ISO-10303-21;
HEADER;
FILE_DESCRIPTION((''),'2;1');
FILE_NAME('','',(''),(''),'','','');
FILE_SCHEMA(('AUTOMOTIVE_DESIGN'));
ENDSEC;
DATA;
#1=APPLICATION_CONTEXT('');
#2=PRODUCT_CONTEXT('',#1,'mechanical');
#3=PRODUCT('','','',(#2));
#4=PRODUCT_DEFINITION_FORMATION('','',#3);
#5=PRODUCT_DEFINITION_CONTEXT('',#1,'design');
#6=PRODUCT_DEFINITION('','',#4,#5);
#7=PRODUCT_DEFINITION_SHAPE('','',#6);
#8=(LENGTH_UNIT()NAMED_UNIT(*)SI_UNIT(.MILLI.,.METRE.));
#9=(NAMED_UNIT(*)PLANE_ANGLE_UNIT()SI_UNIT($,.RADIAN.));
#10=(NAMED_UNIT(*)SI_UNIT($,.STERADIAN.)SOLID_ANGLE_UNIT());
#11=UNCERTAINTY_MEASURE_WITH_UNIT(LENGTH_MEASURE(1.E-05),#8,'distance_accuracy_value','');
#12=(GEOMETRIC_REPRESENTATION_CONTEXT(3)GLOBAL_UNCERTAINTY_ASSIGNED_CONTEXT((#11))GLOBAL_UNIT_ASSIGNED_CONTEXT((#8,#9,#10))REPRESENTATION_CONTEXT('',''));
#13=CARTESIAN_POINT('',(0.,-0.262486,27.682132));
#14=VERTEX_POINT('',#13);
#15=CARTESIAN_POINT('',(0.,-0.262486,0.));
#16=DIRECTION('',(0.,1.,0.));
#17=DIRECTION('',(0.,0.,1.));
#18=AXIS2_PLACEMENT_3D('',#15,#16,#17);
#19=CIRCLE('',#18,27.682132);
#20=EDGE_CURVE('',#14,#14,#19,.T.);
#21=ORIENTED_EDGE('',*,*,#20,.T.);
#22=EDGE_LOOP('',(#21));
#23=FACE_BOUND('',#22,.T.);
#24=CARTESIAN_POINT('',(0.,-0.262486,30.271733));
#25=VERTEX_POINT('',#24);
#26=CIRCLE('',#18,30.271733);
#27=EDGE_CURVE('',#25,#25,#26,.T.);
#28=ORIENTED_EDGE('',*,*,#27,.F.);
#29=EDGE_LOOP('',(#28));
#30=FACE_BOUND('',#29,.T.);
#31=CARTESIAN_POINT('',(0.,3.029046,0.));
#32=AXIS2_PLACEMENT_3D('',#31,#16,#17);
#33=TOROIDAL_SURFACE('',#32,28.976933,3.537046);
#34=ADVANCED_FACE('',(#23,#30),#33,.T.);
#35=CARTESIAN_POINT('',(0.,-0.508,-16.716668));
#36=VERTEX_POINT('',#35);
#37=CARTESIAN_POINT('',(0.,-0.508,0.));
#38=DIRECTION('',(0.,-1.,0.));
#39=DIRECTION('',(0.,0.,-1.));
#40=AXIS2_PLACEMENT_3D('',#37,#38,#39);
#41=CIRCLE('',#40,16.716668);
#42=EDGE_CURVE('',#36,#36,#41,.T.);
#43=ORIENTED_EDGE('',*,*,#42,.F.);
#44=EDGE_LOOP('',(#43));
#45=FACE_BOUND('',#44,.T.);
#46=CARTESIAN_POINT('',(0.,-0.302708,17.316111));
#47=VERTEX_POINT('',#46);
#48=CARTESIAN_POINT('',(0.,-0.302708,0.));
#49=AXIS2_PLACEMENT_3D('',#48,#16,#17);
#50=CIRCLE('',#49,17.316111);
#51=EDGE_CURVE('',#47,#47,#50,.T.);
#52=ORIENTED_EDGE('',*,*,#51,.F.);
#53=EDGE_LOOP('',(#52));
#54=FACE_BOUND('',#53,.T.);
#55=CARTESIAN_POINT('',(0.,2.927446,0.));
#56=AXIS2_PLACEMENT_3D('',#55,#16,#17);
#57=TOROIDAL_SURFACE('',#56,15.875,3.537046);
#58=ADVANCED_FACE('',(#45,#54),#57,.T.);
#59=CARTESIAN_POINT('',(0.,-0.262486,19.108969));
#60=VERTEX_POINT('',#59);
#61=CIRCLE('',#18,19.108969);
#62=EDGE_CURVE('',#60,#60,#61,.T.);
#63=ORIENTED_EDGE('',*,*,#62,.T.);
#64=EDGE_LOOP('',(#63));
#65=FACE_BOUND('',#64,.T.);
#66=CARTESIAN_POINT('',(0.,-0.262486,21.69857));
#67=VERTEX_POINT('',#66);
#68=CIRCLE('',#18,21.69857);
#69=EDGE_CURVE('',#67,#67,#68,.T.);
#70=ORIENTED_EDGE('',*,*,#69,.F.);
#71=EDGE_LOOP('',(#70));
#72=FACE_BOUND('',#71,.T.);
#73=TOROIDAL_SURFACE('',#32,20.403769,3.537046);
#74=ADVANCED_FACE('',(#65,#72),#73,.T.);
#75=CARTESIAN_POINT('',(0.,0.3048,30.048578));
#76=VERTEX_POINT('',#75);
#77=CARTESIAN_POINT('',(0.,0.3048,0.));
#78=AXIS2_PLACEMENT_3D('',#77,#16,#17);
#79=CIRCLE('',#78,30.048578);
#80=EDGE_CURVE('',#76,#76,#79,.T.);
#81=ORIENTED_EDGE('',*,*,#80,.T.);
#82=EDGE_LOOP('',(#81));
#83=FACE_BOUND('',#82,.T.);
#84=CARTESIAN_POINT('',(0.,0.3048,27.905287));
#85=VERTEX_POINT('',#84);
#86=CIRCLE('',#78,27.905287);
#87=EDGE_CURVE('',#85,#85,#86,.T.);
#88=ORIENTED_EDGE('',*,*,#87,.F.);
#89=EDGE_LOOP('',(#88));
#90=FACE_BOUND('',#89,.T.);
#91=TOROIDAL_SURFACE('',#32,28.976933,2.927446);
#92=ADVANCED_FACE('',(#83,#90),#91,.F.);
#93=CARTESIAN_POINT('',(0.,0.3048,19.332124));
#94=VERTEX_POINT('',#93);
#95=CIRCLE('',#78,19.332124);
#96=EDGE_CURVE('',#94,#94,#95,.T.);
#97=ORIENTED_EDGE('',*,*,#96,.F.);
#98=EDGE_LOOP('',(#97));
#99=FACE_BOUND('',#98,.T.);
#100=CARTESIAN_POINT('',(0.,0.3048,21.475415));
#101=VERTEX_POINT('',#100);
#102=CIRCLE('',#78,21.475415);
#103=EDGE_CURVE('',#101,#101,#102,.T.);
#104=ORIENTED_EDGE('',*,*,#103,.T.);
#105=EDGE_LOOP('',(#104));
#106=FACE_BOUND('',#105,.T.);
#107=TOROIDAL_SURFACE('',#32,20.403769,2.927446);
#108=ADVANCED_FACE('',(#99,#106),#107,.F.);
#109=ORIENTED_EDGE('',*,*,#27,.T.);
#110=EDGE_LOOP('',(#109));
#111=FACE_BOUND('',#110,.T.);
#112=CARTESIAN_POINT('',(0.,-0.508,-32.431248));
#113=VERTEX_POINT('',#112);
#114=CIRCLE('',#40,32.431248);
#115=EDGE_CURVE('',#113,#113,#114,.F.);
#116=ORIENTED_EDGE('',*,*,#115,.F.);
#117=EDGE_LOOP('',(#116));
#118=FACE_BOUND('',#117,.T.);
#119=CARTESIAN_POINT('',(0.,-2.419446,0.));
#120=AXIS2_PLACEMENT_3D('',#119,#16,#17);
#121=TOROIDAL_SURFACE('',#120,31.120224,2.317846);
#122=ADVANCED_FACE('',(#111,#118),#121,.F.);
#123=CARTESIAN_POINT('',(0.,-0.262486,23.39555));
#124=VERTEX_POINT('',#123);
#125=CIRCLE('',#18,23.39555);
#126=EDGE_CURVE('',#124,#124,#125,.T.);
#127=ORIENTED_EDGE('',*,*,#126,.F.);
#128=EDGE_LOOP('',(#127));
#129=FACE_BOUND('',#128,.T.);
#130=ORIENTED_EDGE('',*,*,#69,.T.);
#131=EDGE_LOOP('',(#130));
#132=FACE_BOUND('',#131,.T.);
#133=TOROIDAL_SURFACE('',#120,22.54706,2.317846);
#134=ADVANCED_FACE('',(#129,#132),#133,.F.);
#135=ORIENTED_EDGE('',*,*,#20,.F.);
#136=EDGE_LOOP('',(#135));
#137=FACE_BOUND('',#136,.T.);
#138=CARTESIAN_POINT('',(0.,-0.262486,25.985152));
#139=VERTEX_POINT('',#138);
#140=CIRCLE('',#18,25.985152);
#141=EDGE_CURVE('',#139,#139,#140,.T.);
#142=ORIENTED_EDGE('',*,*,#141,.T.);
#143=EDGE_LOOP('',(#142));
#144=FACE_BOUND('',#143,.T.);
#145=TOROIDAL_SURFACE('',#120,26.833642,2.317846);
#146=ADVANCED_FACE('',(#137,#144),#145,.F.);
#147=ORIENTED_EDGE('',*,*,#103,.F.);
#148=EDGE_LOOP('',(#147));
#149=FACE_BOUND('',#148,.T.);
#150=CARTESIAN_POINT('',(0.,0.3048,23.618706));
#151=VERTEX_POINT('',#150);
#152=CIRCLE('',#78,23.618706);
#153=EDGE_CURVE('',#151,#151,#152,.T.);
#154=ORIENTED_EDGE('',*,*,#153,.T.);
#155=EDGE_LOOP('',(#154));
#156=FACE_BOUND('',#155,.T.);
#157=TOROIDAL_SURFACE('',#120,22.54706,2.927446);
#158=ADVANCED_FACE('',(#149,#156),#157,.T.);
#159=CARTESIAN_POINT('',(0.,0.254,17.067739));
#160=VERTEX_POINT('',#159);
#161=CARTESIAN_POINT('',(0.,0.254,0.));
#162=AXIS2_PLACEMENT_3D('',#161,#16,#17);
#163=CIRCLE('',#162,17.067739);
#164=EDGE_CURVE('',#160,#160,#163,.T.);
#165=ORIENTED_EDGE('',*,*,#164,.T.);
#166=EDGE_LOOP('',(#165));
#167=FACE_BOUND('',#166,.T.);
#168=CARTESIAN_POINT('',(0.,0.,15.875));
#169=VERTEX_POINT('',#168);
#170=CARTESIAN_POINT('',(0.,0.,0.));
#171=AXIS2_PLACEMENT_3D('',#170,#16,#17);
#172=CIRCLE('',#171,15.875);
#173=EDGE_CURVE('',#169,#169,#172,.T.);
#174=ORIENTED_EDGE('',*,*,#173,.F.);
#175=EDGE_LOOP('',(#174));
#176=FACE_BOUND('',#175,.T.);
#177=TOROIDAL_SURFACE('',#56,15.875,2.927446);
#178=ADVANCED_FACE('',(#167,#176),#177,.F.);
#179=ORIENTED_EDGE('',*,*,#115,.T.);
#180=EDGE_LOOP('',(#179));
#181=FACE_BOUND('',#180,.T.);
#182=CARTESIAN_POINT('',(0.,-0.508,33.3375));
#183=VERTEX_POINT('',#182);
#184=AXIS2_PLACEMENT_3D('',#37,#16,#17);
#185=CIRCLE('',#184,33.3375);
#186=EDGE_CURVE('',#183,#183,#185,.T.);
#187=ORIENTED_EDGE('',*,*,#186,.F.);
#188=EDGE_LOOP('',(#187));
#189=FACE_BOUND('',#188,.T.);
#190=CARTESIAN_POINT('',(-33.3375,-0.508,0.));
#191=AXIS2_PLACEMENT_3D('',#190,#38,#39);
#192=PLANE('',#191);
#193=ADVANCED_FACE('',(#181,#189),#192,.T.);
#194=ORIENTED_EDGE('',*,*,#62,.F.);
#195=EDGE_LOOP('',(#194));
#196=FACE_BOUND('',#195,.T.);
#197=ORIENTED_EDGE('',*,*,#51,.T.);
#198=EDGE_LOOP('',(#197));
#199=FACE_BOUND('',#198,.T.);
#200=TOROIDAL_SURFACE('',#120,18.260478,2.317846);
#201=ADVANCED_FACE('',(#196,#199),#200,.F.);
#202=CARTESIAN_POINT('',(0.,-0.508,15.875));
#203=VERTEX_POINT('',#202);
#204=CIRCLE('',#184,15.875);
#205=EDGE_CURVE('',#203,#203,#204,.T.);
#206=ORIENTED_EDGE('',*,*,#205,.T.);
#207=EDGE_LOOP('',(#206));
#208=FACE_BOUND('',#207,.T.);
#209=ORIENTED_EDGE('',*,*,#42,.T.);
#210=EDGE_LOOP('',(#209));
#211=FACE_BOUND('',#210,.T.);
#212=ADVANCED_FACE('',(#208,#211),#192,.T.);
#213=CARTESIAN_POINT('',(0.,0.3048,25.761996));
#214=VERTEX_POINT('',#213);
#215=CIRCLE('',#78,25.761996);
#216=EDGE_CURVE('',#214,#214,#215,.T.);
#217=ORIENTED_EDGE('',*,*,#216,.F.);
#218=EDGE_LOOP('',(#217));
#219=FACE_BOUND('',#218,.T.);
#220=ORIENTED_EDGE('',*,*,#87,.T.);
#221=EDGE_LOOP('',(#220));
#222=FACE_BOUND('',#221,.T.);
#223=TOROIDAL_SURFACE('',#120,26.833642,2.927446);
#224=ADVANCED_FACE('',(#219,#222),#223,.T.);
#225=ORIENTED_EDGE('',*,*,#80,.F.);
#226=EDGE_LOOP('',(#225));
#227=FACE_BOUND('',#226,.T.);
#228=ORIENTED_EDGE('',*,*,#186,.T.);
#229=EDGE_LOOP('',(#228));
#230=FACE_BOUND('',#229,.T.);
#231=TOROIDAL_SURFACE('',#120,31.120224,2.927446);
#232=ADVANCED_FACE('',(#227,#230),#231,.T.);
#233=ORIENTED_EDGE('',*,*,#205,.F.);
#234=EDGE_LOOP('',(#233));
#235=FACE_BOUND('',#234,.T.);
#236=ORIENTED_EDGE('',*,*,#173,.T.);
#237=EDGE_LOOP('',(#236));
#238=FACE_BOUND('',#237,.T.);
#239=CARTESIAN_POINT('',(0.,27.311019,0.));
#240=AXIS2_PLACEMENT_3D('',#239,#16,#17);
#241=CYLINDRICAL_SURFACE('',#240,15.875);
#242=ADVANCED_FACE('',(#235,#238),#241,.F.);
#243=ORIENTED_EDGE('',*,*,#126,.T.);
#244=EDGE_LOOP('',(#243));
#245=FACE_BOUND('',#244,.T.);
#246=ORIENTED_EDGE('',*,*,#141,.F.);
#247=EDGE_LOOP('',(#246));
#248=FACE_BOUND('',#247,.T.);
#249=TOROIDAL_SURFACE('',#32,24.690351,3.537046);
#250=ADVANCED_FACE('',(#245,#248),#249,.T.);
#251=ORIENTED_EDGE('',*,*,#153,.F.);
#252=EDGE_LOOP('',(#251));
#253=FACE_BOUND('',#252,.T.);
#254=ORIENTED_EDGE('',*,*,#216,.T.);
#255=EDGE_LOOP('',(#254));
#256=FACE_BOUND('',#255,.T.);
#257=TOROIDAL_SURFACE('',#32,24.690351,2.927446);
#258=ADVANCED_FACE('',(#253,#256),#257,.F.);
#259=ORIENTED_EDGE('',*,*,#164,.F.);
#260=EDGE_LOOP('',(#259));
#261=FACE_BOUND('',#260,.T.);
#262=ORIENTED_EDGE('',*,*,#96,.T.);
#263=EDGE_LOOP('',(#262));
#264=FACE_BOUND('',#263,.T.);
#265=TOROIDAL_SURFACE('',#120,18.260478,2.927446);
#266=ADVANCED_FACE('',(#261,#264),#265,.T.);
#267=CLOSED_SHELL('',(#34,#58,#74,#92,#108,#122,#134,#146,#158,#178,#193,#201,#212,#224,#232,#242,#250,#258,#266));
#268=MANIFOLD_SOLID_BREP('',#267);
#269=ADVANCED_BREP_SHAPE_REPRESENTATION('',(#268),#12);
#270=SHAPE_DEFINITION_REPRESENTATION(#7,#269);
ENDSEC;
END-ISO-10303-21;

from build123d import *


# Read off the part's stored shape, not the designer's step: Shell1
with BuildPart() as part:
    # Sketch1 → Revolve1 (revolve)
    with BuildSketch(Plane.XY, mode=Mode.PRIVATE) as revolve1_sk:
        with BuildLine():
            Line((-33.3375, -0.508), (-15.875, -0.508))
            Line((-15.875, -0.508), (-15.875, 0))
            ThreePointArc((-15.875, 0), (-16.484742306, 0.064204054), (-17.067739167, 0.254))
            ThreePointArc((-17.067739167, 0.254), (-18.194819496, 0.507263586), (-19.332123768, 0.3048))
            ThreePointArc((-19.332123768, 0.3048), (-20.403769202, 0.1016), (-21.475414637, 0.3048))
            ThreePointArc((-21.475414637, 0.3048), (-22.547060071, 0.508), (-23.618705505, 0.3048))
            ThreePointArc((-23.618705505, 0.3048), (-24.690350939, 0.1016), (-25.761996373, 0.3048))
            ThreePointArc((-25.761996373, 0.3048), (-26.833641807, 0.508), (-27.905287241, 0.3048))
            ThreePointArc((-27.905287241, 0.3048), (-28.976932676, 0.1016), (-30.04857811, 0.3048))
            ThreePointArc((-30.04857811, 0.3048), (-31.822561475, 0.422500791), (-33.3375, -0.508))
        make_face()
    revolve(revolve1_sk.sketch.rotate(Axis((0, 27.311018835, 0), (0, -1, 0)), 270), axis=Axis((0, 27.311018835, 0), (0, -1, 0)))

    # Shell1 outline → Shell1 (revolve, cut)
    with BuildSketch(Plane.XY):
        with BuildLine():
            ThreePointArc((17.316110519, -0.302708031), (17.020995547, -0.41880395), (16.716668134, -0.508))
            Line((16.716668134, -0.508), (20.403769203, -0.508))
            ThreePointArc((20.403769203, -0.508), (19.744833362, -0.44607961), (19.108968503, -0.262486425))
            ThreePointArc((19.108968503, -0.262486425), (18.208492036, -0.102183066), (17.316110519, -0.302708031))
        make_face()
        with BuildLine():
            ThreePointArc((21.698569902, -0.262486425), (21.062705043, -0.44607961), (20.403769203, -0.508))
            Line((20.403769203, -0.508), (24.690350939, -0.508))
            ThreePointArc((24.690350939, -0.508), (24.031415098, -0.44607961), (23.395550239, -0.262486425))
            ThreePointArc((23.395550239, -0.262486425), (22.54706007, -0.1016), (21.698569902, -0.262486425))
        make_face()
        with BuildLine():
            ThreePointArc((25.985151639, -0.262486425), (25.34928678, -0.44607961), (24.690350939, -0.508))
            Line((24.690350939, -0.508), (28.976932676, -0.508))
            ThreePointArc((28.976932676, -0.508), (28.317996835, -0.44607961), (27.682131976, -0.262486425))
            ThreePointArc((27.682131976, -0.262486425), (26.833641808, -0.1016), (25.985151639, -0.262486425))
        make_face()
        with BuildLine():
            ThreePointArc((30.271733375, -0.262486425), (29.635868516, -0.44607961), (28.976932676, -0.508))
            Line((28.976932676, -0.508), (32.431247767, -0.508))
            ThreePointArc((32.431247767, -0.508), (31.382051095, -0.116435704), (30.271733375, -0.262486425))
        make_face()
    revolve(axis=Axis((0, 0, 0), (0, 1, 0)), mode=Mode.SUBTRACT)


solid = part.part
